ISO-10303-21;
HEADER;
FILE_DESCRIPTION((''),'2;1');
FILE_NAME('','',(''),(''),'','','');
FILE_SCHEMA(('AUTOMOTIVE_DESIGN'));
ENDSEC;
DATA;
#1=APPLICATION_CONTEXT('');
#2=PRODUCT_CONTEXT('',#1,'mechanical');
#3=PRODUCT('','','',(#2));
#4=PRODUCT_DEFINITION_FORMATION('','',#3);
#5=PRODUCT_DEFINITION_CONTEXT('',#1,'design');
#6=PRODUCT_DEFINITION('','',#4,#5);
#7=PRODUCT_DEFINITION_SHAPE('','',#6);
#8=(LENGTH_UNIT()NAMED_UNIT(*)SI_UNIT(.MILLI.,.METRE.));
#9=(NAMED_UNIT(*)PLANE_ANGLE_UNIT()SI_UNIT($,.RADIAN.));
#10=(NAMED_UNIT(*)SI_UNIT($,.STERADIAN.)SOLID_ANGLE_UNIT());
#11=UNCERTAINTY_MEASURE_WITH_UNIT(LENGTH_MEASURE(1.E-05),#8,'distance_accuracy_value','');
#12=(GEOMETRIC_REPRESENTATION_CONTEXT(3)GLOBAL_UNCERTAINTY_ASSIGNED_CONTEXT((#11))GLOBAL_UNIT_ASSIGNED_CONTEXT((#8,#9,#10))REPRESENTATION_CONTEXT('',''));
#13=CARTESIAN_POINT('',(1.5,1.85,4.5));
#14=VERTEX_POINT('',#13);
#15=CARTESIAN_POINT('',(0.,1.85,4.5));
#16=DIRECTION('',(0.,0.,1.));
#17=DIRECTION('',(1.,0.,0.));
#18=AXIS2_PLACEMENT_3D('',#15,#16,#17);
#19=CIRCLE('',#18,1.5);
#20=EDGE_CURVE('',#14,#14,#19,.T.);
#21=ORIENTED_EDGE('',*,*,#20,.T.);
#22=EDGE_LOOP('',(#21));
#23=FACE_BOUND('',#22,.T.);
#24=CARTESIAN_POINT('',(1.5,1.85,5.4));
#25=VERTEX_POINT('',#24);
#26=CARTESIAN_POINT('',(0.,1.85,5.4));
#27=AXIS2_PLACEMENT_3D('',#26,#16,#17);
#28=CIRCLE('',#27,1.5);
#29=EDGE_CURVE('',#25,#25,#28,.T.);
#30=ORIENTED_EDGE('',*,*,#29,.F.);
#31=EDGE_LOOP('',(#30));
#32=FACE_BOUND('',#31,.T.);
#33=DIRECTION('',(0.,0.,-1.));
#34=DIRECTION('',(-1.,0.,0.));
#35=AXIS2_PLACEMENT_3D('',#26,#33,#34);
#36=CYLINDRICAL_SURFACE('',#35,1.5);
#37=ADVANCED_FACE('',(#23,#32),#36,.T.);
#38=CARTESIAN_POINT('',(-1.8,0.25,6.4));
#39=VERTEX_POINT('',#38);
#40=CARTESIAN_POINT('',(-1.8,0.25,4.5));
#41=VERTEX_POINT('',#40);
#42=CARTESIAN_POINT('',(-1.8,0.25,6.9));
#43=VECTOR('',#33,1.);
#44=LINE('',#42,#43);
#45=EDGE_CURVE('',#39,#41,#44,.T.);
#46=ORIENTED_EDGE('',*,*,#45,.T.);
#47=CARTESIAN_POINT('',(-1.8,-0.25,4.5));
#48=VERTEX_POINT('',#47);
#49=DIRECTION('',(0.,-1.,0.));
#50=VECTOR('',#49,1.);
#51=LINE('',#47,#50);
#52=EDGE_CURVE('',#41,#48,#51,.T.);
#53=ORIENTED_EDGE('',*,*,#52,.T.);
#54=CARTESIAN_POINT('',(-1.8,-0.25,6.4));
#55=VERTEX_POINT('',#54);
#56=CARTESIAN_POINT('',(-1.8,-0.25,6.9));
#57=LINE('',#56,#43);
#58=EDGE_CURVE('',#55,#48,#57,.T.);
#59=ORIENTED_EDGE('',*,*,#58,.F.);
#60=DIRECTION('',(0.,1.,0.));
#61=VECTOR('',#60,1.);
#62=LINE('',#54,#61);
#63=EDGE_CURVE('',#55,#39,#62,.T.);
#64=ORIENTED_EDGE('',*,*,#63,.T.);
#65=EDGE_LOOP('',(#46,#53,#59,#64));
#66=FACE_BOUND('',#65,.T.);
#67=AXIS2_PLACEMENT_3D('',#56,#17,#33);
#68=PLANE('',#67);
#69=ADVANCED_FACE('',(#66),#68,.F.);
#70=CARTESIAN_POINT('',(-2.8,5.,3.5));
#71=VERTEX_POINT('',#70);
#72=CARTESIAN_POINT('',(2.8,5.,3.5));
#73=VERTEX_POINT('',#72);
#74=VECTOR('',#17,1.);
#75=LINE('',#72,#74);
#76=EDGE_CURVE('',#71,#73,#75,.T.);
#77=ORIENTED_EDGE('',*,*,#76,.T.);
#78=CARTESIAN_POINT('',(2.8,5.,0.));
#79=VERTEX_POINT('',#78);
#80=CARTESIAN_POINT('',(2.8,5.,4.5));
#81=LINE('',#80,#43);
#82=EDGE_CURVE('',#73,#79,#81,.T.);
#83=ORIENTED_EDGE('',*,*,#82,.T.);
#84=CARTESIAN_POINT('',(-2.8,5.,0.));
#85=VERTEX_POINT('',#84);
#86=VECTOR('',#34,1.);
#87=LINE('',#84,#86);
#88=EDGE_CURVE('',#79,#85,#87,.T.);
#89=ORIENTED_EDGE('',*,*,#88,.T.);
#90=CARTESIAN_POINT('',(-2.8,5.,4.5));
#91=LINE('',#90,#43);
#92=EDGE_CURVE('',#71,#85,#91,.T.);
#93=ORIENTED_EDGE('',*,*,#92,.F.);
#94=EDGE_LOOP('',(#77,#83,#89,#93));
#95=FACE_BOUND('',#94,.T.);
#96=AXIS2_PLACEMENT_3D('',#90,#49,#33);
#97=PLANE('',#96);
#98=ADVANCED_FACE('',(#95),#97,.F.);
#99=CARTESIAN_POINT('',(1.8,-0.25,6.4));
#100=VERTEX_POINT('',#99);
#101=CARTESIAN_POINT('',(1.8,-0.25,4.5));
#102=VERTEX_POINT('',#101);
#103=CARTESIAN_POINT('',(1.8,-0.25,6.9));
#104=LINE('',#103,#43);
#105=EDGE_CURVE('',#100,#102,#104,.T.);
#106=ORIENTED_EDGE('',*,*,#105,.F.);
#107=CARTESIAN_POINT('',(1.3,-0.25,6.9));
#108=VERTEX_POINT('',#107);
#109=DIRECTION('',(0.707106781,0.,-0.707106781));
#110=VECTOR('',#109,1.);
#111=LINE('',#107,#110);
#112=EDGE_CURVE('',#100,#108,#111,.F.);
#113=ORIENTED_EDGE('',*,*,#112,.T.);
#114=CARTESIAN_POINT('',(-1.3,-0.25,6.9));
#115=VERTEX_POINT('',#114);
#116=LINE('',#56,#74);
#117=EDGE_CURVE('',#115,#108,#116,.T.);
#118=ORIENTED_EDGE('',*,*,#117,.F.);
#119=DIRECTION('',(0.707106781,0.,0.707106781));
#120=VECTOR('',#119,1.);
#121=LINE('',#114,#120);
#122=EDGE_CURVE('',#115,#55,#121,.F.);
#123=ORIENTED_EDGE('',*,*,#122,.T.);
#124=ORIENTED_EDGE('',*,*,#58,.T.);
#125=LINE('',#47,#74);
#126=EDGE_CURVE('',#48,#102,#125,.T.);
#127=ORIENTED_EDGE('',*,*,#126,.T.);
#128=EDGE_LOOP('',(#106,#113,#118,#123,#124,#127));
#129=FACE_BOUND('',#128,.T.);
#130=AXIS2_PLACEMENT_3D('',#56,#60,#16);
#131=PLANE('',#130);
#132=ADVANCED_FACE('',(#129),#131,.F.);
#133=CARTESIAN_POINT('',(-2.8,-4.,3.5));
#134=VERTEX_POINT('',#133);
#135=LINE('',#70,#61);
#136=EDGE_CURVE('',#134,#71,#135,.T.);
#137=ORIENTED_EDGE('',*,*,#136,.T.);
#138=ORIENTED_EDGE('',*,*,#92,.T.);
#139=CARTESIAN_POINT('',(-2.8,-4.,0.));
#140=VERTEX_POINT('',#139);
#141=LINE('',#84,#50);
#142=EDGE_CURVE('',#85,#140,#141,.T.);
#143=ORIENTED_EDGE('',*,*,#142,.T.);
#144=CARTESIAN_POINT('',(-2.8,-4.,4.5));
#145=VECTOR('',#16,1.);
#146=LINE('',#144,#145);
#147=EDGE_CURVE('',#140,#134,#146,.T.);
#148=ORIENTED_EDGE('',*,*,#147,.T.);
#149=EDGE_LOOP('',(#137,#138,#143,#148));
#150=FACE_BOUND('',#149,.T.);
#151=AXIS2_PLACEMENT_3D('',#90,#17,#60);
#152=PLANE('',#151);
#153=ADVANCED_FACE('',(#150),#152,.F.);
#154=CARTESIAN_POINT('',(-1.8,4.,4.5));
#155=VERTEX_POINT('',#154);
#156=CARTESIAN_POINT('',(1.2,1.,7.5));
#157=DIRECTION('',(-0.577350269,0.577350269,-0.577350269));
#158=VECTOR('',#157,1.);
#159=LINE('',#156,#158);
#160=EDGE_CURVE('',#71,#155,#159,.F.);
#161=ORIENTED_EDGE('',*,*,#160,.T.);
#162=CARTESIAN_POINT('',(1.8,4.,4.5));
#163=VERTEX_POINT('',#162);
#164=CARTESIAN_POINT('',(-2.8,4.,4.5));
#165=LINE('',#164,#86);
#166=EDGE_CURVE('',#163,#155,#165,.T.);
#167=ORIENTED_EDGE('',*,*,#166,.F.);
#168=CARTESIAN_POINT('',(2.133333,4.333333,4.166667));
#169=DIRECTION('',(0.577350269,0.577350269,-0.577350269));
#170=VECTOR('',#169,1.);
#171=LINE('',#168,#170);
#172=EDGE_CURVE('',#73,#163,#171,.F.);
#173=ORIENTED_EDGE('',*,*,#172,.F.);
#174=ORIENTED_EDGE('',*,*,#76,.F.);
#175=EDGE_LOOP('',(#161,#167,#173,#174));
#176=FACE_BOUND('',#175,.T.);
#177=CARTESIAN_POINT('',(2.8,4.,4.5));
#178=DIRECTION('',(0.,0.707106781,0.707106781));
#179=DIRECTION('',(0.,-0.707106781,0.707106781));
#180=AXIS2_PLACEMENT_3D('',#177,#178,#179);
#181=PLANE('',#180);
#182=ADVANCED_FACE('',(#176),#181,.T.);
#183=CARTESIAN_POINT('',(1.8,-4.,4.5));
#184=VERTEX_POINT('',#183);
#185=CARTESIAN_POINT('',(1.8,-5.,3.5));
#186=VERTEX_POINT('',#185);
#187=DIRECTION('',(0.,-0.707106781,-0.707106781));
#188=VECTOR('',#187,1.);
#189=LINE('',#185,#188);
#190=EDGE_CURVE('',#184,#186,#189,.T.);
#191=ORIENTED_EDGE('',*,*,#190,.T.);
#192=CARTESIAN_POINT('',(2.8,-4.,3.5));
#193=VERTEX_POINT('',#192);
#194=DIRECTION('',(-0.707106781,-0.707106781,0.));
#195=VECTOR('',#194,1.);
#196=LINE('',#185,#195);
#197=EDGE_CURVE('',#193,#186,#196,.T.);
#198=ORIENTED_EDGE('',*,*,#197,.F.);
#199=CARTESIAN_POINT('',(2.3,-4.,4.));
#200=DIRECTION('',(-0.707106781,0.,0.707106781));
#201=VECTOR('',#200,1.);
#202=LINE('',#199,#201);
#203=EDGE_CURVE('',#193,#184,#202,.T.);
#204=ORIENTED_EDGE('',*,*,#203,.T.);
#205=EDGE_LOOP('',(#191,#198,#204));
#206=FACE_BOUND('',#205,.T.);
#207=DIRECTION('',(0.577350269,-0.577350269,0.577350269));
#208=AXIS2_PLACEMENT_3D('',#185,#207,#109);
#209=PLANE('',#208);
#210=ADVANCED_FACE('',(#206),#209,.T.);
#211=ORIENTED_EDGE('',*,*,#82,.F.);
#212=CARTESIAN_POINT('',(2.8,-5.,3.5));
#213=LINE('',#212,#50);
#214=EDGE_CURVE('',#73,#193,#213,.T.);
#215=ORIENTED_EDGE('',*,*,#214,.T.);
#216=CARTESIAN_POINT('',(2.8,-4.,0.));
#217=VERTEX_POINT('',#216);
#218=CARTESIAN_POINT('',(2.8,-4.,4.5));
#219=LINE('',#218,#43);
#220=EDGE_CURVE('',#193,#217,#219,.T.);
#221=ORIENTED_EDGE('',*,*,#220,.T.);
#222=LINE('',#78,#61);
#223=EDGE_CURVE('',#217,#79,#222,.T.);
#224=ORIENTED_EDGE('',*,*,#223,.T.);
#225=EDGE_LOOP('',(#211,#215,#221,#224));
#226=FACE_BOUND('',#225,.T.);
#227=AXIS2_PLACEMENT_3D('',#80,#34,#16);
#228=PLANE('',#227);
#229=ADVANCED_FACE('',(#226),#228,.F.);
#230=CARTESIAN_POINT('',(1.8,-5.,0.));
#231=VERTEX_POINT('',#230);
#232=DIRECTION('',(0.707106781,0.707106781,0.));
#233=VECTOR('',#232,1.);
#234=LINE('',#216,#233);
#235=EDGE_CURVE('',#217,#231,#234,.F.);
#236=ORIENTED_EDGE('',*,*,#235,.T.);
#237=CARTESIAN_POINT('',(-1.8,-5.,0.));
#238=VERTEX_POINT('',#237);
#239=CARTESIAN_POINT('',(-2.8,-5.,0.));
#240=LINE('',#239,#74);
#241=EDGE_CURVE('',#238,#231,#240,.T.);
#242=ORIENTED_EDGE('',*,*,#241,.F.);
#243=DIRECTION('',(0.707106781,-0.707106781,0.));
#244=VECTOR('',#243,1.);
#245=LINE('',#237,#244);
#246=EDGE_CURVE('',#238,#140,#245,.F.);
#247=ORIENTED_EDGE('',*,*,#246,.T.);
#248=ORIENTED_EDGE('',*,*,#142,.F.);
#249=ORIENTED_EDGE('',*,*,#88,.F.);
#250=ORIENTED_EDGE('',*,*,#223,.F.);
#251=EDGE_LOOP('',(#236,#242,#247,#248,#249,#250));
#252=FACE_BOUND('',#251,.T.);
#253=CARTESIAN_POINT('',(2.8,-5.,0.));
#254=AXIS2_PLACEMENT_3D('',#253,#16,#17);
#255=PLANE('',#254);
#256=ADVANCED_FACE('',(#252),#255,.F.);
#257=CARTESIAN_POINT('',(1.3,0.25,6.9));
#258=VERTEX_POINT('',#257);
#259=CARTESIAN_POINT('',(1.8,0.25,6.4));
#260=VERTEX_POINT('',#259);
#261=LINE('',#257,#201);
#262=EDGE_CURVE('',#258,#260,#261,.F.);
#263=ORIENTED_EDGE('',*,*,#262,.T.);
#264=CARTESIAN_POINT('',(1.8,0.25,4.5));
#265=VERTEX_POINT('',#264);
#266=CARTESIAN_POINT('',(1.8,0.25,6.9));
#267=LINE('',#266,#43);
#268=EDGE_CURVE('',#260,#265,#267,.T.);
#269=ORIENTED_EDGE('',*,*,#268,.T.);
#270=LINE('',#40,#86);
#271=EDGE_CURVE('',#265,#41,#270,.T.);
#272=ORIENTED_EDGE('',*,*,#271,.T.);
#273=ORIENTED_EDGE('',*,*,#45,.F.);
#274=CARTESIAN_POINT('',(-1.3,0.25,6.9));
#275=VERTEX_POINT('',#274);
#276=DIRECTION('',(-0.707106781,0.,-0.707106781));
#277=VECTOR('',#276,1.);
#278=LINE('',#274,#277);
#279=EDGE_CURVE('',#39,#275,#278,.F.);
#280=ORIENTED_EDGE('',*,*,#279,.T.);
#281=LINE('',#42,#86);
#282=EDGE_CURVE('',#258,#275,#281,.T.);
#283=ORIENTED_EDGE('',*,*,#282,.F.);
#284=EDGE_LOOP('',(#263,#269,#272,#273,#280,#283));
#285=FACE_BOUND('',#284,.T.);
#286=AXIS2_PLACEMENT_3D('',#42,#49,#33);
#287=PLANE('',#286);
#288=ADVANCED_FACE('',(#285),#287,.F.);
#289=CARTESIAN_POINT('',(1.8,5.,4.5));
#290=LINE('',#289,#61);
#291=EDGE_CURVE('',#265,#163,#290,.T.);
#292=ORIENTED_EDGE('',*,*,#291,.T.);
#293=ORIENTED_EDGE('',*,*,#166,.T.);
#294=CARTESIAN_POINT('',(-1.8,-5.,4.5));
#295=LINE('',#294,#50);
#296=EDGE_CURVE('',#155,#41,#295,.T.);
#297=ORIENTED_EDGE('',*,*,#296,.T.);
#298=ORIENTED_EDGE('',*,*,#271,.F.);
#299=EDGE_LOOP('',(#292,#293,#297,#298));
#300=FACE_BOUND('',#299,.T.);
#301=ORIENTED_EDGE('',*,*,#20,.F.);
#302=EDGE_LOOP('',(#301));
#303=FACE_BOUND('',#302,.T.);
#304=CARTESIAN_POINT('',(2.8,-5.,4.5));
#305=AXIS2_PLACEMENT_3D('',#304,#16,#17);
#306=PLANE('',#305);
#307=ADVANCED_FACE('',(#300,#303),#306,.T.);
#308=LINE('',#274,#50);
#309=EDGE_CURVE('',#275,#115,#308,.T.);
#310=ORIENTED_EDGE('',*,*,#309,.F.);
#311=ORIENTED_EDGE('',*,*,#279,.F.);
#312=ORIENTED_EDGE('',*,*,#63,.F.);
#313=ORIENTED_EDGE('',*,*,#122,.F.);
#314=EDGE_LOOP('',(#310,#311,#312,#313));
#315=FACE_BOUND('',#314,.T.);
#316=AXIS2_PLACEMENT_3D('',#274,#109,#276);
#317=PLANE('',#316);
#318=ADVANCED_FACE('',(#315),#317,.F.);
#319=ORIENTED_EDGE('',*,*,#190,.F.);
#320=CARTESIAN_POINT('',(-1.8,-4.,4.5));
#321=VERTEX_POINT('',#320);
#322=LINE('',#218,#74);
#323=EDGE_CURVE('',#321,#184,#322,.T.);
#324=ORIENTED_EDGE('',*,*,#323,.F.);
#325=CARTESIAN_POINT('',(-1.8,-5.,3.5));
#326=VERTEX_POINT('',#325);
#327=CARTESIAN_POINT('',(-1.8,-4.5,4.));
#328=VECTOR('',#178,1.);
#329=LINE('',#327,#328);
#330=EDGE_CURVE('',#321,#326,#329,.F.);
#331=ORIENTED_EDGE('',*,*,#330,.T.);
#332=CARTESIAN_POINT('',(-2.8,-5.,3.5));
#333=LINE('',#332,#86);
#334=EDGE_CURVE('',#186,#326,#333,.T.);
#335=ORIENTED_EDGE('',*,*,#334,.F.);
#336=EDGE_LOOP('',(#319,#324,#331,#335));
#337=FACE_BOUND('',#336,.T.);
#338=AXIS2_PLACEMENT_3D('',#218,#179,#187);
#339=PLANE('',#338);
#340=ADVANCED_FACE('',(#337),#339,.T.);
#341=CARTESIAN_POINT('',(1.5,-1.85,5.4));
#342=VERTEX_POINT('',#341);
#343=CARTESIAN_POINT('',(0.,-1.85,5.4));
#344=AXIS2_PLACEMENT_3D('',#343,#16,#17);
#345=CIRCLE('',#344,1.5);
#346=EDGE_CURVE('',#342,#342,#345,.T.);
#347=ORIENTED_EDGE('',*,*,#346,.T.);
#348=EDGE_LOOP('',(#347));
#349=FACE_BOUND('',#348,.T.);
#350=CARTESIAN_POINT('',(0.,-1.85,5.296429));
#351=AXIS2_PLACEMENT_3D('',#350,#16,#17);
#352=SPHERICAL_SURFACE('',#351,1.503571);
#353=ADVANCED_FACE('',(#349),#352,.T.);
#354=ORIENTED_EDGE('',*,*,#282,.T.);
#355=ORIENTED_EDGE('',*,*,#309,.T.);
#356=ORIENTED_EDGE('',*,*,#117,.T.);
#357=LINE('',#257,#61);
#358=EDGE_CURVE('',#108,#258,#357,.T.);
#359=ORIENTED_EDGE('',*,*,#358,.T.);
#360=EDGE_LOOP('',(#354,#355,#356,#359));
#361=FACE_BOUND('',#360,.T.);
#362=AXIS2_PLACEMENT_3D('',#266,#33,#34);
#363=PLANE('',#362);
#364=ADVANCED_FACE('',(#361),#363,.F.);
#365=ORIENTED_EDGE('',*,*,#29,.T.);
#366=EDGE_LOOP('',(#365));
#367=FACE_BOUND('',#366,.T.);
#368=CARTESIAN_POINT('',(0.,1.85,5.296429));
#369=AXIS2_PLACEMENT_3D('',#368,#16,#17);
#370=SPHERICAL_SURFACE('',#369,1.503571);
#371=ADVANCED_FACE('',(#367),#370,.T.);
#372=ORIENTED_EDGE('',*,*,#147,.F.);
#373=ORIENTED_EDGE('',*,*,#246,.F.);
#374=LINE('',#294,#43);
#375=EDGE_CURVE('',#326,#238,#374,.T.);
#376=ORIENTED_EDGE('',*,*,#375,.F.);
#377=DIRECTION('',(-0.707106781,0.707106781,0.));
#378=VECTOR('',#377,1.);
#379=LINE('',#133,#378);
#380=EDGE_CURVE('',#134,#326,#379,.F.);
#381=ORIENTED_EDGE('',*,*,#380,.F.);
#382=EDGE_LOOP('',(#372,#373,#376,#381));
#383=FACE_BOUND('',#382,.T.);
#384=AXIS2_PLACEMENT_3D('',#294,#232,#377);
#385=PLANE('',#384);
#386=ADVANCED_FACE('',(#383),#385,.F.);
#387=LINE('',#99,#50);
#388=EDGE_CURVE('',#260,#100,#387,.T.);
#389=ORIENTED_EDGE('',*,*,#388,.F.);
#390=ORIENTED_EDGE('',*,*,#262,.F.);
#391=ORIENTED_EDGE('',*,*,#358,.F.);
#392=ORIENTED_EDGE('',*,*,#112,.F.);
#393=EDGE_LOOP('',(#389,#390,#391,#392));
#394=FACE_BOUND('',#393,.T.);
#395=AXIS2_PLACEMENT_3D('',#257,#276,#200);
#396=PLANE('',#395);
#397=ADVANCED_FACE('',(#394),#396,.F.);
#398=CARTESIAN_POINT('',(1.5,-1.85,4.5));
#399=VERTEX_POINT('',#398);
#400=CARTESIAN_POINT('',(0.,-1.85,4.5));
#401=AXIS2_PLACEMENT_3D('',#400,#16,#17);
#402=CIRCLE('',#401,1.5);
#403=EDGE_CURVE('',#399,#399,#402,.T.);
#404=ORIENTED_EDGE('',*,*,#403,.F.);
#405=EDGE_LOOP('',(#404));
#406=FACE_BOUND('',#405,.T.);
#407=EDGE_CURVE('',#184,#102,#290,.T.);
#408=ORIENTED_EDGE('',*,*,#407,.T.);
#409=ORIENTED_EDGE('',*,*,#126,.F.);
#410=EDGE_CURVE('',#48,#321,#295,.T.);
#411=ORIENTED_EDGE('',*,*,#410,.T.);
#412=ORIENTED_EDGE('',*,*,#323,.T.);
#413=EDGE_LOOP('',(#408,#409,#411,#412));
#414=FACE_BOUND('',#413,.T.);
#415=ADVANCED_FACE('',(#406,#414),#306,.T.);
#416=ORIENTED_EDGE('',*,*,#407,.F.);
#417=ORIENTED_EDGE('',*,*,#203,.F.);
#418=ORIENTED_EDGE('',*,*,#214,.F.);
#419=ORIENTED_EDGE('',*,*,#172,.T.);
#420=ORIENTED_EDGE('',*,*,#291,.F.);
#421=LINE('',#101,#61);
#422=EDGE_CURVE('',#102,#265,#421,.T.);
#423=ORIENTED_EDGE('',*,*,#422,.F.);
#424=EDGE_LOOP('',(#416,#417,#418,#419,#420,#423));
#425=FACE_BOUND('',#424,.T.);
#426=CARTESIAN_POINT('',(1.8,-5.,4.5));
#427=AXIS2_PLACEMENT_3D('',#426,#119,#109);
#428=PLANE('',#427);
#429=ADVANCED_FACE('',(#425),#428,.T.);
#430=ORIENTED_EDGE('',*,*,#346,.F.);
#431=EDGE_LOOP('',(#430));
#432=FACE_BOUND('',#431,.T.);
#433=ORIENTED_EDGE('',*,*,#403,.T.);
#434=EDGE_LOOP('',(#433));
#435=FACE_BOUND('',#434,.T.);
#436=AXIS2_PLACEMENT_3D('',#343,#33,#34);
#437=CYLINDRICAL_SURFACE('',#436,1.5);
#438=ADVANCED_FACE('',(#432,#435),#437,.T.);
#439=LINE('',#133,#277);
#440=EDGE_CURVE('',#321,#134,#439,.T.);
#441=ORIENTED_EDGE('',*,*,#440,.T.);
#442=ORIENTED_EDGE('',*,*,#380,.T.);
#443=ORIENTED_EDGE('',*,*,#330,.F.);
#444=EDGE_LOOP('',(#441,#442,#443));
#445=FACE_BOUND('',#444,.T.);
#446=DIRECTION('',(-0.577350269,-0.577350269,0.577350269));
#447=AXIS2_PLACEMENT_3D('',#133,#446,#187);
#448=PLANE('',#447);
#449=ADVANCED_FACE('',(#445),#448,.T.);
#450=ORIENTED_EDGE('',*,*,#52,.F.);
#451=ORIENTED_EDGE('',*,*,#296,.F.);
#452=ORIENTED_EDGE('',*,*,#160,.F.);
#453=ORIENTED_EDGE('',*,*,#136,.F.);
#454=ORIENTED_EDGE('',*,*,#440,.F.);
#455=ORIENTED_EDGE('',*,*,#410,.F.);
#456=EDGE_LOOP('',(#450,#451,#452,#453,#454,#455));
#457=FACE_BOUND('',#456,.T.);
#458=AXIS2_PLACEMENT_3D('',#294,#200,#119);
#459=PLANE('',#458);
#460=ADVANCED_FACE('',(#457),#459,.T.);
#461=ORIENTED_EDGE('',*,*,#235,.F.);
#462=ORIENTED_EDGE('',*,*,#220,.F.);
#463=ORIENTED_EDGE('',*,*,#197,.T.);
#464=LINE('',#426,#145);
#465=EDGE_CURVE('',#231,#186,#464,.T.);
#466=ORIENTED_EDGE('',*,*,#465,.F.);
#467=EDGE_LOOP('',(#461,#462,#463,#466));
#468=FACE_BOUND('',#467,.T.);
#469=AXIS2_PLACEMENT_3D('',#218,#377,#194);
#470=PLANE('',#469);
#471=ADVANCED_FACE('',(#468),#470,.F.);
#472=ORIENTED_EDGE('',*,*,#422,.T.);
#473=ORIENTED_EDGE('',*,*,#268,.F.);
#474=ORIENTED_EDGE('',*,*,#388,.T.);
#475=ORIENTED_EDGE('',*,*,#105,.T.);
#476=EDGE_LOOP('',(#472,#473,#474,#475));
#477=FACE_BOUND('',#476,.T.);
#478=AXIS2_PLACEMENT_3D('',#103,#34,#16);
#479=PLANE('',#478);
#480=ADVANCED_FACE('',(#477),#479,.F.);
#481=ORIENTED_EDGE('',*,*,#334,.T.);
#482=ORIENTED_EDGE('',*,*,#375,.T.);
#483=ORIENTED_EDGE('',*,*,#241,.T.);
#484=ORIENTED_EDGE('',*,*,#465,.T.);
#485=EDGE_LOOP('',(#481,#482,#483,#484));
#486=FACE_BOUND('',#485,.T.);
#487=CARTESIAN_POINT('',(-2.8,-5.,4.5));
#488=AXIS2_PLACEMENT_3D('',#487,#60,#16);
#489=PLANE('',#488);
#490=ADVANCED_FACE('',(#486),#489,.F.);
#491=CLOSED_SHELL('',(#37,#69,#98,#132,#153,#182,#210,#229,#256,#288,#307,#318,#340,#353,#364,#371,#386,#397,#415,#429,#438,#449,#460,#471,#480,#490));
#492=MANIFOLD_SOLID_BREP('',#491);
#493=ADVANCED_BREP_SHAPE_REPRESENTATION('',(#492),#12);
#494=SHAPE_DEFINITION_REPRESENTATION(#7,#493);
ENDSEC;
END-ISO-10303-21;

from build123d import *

# Parameters (mm, degrees)
SKETCH1_W           = 5.6
SKETCH1_H           = 10
BOSS_EXTRUDE1_DEPTH = 4.5
CHAMFER1_SIZE       = 1
SKETCH2_R           = 1.5
BOSS_EXTRUDE2_DEPTH = 0.9
SKETCH3_W           = 3.6
SKETCH3_H           = 0.5
BOSS_EXTRUDE3_DEPTH = 2.4
CHAMFER2_SIZE       = 0.5


# Read off the part's stored shape, not the designer's step: Dome1, Dome2
with BuildPart() as part:
    # Sketch1 → Boss-Extrude1 (new body)
    with BuildSketch(Plane.XY):
        Rectangle(SKETCH1_W, SKETCH1_H)
    extrude(amount=BOSS_EXTRUDE1_DEPTH)

    # Chamfer1
    chamfer1_edges = [part.edges().sort_by_distance(p)[0] for p in [
        (-2.8, 0, 4.5),
        (0, -5, 4.5),
        (2.8, 0, 4.5),
        (0, 5, 4.5),
        (2.8, -5, 2.25),
        (-2.8, -5, 2.25),
    ]]
    chamfer(chamfer1_edges, length=CHAMFER1_SIZE)

    # Sketch2 → Boss-Extrude2 (add)
    with BuildSketch(Plane.XY.offset(4.5)):
        with Locations((0, 1.85)):
            Circle(SKETCH2_R)
        with Locations((0, -1.85)):
            Circle(SKETCH2_R)
    extrude(amount=BOSS_EXTRUDE2_DEPTH)

    # Dome1 outline → Dome1 (revolve)
    with BuildSketch(Plane.XZ.offset(-1.85)):
        with BuildLine():
            Line((0, 5.4), (1.5, 5.399999999))
            ThreePointArc((1.5, 5.399999999), (1.025914227, 6.395622385), (0, 6.8))
            Line((0, 6.8), (0, 5.4))
        make_face()
    revolve(axis=Axis((0, 1.85, 0), (0, 0, 1)))

    # Dome2 outline → Dome2 (revolve)
    with BuildSketch(Plane.XZ.offset(1.85)):
        with BuildLine():
            Line((0, 5.4), (1.5, 5.399999999))
            ThreePointArc((1.5, 5.399999999), (1.025914227, 6.395622385), (0, 6.8))
            Line((0, 6.8), (0, 5.4))
        make_face()
    revolve(axis=Axis((0, -1.85, 0), (0, 0, 1)))

    # Sketch3 → Boss-Extrude3 (add)
    with BuildSketch(Plane.XY.offset(4.5)):
        Rectangle(SKETCH3_W, SKETCH3_H)
    extrude(amount=BOSS_EXTRUDE3_DEPTH)

    # Chamfer2
    chamfer2_edges = [part.edges().sort_by_distance(p)[0] for p in [
        (1.8, 0, 6.9),
        (-1.8, 0, 6.9),
    ]]
    chamfer(chamfer2_edges, length=CHAMFER2_SIZE)


solid = part.part
